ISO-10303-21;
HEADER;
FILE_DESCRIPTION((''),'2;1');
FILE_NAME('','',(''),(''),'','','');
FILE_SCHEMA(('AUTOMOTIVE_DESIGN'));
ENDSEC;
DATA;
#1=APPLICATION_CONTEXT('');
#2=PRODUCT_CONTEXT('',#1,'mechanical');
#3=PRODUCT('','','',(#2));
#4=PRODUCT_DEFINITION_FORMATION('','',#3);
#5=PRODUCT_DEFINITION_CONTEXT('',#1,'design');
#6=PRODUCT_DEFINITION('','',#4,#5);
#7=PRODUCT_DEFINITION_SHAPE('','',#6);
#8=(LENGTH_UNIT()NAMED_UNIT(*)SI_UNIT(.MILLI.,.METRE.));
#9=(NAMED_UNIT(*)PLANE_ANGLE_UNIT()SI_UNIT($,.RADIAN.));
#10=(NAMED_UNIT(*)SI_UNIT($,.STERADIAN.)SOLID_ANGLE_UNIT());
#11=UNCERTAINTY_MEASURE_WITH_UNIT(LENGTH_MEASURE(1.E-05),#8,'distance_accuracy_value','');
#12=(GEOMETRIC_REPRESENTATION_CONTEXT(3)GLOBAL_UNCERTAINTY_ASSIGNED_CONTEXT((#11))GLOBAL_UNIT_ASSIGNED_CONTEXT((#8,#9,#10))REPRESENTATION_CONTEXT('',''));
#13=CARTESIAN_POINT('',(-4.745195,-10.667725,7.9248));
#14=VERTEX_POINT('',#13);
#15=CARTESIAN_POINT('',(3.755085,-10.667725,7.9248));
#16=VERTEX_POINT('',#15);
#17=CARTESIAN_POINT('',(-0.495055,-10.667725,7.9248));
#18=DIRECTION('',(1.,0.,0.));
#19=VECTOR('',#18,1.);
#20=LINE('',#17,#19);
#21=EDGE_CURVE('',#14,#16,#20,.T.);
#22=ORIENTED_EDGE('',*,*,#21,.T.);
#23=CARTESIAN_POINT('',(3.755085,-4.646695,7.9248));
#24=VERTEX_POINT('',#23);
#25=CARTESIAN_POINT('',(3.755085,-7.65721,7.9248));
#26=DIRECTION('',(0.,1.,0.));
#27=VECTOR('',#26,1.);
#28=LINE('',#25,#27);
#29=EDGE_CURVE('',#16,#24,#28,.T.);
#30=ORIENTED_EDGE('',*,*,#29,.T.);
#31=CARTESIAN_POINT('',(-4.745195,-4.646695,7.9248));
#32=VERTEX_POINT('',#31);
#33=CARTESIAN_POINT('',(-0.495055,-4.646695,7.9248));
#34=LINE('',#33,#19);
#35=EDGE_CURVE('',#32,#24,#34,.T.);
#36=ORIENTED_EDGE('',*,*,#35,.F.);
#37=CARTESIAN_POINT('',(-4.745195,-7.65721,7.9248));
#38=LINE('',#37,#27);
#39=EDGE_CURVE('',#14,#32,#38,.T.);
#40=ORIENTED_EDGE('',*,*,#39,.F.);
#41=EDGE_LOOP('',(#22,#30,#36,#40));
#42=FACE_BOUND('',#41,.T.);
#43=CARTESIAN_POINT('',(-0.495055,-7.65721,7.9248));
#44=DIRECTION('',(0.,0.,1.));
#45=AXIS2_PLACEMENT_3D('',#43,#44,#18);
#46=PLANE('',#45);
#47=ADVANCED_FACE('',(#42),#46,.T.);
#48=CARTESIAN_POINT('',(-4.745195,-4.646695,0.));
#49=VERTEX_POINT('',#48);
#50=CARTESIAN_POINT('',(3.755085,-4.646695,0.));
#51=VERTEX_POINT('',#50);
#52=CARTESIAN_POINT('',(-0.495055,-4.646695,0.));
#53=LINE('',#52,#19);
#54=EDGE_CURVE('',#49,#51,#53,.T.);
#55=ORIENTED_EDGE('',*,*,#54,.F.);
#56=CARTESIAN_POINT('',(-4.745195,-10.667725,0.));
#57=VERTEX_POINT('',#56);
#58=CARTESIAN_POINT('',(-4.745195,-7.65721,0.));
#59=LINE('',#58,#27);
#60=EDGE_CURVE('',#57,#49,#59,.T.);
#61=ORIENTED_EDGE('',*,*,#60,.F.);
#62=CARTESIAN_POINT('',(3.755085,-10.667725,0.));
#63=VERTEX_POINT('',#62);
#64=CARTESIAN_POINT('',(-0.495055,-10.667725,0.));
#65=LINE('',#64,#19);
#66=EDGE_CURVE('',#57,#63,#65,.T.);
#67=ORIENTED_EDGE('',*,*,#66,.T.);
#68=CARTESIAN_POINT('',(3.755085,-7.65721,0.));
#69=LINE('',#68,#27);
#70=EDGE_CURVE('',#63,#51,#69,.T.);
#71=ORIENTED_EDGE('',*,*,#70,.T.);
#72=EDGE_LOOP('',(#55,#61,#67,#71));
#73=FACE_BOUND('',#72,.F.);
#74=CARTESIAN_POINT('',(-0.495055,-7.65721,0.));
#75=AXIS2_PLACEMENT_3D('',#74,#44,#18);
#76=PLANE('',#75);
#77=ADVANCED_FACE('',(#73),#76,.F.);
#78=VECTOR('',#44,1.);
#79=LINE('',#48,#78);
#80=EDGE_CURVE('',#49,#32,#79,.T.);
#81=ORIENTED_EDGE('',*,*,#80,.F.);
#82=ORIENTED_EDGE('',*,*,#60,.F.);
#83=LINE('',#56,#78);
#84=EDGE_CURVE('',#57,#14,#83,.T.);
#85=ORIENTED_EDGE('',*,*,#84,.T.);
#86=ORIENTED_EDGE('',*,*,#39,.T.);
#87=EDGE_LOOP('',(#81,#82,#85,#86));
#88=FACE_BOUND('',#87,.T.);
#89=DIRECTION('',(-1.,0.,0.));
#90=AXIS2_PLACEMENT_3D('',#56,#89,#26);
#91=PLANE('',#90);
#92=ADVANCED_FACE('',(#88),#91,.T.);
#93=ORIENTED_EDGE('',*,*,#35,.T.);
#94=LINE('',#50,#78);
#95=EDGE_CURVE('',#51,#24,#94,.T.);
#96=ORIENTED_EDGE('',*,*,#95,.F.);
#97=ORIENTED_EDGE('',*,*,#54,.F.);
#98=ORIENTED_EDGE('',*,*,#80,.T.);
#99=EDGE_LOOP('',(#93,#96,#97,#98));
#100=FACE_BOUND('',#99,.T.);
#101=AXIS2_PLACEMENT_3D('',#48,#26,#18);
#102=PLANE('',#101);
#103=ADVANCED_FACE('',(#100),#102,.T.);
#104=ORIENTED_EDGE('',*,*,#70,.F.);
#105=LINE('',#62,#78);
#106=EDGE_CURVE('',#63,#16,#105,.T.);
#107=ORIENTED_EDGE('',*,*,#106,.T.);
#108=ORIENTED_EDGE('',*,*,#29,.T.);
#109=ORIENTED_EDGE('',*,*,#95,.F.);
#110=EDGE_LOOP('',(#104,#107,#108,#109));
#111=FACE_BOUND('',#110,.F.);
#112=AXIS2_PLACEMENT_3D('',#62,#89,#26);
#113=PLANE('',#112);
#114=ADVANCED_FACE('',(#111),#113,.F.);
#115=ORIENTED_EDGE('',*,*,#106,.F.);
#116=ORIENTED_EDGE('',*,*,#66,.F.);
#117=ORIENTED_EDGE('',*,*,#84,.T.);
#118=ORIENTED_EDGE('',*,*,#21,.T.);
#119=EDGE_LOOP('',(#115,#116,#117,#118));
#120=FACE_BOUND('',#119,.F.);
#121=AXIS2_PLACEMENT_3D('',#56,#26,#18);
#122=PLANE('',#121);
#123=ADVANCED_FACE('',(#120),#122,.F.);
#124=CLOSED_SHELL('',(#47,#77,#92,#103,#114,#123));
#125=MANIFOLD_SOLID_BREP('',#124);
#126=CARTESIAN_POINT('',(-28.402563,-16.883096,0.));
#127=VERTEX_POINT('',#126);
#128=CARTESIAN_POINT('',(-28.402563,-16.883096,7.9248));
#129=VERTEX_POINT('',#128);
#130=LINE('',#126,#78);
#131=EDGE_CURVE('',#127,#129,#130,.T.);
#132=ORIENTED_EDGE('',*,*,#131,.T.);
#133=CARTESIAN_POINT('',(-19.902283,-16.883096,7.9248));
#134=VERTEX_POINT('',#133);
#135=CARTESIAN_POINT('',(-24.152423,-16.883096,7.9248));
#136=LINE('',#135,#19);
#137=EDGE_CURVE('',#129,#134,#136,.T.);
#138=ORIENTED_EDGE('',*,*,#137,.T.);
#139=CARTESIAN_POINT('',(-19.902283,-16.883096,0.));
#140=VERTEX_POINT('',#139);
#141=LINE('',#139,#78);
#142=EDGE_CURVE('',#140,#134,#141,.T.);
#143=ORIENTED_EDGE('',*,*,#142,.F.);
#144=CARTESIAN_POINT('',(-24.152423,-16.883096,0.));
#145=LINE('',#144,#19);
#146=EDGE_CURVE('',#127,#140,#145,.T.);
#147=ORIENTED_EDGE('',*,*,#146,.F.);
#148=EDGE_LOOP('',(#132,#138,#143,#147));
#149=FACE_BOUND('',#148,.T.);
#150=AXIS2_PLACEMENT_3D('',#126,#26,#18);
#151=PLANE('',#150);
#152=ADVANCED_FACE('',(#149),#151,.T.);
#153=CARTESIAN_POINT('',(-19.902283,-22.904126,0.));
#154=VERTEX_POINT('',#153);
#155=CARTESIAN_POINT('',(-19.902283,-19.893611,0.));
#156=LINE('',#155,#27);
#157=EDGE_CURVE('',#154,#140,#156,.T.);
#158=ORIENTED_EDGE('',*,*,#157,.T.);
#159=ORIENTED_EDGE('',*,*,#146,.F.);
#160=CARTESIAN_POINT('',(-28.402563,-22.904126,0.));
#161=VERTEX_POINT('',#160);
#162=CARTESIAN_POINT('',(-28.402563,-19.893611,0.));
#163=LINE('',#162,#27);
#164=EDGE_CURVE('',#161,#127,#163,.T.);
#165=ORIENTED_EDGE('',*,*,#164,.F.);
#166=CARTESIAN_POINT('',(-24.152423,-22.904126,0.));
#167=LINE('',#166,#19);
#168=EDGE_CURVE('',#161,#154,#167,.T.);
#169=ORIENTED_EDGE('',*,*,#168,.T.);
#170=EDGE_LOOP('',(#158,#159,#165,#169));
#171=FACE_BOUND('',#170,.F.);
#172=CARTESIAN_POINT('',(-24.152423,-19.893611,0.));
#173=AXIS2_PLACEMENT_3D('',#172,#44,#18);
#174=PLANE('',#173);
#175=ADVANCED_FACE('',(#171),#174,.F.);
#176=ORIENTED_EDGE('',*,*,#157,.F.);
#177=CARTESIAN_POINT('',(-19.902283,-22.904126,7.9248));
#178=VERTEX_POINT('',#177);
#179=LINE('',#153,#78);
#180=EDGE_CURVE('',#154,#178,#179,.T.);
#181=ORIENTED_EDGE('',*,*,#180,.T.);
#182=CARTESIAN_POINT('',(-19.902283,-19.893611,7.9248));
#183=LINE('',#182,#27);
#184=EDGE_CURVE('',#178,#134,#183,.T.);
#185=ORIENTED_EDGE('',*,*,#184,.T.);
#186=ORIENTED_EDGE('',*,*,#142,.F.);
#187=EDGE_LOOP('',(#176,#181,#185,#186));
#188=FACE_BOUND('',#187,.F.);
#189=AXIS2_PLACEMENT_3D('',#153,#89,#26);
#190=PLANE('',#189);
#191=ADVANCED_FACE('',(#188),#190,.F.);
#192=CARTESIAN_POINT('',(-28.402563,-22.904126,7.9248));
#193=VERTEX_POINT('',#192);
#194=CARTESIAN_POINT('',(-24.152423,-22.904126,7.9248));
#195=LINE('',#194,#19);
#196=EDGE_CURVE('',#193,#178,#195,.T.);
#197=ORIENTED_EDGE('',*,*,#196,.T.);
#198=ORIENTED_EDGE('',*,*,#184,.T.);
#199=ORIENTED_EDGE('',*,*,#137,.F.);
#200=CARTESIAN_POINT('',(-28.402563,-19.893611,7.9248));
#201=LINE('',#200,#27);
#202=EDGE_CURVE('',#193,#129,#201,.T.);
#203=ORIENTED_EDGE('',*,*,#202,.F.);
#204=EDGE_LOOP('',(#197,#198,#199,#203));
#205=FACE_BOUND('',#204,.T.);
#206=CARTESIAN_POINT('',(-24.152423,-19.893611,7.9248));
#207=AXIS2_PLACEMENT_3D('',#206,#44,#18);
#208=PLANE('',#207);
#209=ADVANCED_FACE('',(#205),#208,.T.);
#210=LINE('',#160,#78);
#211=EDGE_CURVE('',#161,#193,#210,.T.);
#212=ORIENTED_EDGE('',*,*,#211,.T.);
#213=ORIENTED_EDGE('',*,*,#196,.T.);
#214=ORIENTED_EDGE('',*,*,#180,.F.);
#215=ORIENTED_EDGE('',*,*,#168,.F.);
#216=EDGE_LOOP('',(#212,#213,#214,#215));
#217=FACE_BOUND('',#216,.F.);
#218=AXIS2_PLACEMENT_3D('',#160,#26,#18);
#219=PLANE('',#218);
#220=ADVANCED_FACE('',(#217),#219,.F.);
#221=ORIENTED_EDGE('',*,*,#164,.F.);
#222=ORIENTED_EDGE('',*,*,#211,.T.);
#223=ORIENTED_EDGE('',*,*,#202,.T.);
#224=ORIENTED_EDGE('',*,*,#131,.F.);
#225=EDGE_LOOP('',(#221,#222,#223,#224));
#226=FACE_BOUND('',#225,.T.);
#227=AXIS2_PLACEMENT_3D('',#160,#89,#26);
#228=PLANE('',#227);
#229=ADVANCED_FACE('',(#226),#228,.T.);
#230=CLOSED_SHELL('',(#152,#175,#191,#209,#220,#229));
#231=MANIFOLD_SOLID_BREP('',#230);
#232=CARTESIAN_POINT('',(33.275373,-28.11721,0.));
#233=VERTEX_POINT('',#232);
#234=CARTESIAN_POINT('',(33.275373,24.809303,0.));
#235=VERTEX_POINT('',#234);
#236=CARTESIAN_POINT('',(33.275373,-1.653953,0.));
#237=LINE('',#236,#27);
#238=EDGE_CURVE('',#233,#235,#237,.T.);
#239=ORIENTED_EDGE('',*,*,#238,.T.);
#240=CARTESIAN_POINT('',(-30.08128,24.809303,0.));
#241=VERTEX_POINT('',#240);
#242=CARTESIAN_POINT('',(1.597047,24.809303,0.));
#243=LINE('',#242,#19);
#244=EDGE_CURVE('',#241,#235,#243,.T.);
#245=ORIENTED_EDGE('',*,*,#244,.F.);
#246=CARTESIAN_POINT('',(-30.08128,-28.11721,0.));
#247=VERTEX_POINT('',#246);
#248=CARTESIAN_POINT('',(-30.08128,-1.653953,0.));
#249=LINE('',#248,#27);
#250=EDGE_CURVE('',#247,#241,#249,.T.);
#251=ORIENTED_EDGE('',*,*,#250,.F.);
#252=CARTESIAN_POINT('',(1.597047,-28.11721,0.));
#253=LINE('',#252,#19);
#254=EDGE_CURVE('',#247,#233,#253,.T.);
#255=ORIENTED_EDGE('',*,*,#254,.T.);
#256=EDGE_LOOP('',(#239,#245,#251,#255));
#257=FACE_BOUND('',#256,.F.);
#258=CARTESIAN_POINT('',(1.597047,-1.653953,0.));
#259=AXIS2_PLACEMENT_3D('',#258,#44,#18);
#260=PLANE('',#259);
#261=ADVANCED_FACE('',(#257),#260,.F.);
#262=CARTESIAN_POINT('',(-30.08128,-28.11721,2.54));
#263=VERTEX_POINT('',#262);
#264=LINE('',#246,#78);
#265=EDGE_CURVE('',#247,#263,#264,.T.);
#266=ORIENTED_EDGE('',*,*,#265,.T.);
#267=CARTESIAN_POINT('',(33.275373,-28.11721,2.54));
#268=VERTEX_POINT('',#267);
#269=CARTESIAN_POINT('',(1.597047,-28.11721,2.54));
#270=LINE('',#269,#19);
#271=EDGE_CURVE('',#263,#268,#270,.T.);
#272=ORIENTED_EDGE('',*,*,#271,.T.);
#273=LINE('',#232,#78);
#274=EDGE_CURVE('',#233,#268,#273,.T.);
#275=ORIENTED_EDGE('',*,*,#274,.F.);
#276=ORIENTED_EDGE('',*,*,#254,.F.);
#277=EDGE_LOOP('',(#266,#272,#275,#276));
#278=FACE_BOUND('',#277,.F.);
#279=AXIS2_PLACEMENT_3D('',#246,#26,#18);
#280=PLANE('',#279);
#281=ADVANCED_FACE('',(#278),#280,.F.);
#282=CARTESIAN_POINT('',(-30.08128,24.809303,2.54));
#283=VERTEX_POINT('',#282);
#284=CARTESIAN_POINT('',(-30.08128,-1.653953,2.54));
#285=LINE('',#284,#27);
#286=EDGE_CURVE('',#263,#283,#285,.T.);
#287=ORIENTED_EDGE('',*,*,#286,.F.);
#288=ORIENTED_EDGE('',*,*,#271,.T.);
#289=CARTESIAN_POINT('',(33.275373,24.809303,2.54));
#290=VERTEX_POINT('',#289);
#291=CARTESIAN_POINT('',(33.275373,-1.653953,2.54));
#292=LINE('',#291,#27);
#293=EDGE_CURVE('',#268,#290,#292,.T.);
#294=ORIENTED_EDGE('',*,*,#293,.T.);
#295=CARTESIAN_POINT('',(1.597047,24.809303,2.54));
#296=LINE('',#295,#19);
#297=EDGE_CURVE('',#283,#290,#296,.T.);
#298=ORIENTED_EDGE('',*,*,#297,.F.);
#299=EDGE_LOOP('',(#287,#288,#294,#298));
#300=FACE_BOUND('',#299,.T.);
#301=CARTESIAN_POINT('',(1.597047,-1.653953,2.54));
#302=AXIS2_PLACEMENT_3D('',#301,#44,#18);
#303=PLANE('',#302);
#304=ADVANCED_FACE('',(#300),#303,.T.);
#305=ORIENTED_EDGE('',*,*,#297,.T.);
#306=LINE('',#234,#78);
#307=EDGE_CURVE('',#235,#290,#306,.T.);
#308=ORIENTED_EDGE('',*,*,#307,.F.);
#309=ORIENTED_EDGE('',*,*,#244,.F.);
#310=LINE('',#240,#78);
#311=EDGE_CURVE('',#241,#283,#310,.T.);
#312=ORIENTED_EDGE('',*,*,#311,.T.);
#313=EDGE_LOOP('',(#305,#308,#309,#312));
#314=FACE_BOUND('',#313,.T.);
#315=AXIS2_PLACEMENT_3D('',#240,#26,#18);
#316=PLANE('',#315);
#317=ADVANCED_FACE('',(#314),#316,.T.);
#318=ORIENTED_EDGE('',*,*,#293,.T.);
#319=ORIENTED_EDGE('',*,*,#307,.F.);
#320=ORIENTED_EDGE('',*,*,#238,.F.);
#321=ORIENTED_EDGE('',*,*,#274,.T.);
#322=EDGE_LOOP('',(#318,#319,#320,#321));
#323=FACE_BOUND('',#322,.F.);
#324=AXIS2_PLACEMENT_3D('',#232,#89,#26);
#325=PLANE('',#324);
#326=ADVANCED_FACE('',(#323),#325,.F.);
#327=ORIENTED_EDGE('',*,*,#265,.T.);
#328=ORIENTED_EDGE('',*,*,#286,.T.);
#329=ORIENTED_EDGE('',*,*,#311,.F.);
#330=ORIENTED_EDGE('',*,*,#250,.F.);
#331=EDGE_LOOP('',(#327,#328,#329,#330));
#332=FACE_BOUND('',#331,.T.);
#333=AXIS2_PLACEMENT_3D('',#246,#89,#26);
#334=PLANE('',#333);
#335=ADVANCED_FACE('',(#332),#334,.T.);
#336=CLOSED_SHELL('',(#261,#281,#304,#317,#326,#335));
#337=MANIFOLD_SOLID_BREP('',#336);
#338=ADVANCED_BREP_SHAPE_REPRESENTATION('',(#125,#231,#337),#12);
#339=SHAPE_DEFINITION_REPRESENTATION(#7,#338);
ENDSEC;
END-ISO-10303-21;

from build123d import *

# Parameters (mm, degrees)
F0_W     = 63.3566528559
F0_H     = 52.9265124351
F1_DEPTH = 2.54
F2_W     = 8.5002798587
F2_H     = 6.0210302472
F3_DEPTH = 7.9248


# Not quite as in the source:
# - the program builds the solid bodies; features that only make, move or delete a surface that nothing else refers to are left out


with BuildPart() as f1:
    # F0 (on Top) → F1 (new body)
    with BuildSketch(Plane.XY):
        with Locations((1.5970468521, -1.6539534554)):
            Rectangle(F0_W, F0_H)
    extrude(amount=F1_DEPTH)


with BuildPart() as f3:
    # F2 (on Top) → F3 (new body)
    with BuildSketch(Plane.XY):
        with Locations((-24.1524232551, -19.89361085)):
            Rectangle(F2_W, F2_H)
    extrude(amount=F3_DEPTH)


with BuildPart() as f3b:
    # F2 (on Top) → F3, piece 2 (new body)
    with BuildSketch(Plane.XY):
        with Locations((-0.4950552247, -7.6572103426)):
            Rectangle(F2_W, F2_H)
    extrude(amount=F3_DEPTH)


solid = Compound([f1.part, f3.part, f3b.part])
